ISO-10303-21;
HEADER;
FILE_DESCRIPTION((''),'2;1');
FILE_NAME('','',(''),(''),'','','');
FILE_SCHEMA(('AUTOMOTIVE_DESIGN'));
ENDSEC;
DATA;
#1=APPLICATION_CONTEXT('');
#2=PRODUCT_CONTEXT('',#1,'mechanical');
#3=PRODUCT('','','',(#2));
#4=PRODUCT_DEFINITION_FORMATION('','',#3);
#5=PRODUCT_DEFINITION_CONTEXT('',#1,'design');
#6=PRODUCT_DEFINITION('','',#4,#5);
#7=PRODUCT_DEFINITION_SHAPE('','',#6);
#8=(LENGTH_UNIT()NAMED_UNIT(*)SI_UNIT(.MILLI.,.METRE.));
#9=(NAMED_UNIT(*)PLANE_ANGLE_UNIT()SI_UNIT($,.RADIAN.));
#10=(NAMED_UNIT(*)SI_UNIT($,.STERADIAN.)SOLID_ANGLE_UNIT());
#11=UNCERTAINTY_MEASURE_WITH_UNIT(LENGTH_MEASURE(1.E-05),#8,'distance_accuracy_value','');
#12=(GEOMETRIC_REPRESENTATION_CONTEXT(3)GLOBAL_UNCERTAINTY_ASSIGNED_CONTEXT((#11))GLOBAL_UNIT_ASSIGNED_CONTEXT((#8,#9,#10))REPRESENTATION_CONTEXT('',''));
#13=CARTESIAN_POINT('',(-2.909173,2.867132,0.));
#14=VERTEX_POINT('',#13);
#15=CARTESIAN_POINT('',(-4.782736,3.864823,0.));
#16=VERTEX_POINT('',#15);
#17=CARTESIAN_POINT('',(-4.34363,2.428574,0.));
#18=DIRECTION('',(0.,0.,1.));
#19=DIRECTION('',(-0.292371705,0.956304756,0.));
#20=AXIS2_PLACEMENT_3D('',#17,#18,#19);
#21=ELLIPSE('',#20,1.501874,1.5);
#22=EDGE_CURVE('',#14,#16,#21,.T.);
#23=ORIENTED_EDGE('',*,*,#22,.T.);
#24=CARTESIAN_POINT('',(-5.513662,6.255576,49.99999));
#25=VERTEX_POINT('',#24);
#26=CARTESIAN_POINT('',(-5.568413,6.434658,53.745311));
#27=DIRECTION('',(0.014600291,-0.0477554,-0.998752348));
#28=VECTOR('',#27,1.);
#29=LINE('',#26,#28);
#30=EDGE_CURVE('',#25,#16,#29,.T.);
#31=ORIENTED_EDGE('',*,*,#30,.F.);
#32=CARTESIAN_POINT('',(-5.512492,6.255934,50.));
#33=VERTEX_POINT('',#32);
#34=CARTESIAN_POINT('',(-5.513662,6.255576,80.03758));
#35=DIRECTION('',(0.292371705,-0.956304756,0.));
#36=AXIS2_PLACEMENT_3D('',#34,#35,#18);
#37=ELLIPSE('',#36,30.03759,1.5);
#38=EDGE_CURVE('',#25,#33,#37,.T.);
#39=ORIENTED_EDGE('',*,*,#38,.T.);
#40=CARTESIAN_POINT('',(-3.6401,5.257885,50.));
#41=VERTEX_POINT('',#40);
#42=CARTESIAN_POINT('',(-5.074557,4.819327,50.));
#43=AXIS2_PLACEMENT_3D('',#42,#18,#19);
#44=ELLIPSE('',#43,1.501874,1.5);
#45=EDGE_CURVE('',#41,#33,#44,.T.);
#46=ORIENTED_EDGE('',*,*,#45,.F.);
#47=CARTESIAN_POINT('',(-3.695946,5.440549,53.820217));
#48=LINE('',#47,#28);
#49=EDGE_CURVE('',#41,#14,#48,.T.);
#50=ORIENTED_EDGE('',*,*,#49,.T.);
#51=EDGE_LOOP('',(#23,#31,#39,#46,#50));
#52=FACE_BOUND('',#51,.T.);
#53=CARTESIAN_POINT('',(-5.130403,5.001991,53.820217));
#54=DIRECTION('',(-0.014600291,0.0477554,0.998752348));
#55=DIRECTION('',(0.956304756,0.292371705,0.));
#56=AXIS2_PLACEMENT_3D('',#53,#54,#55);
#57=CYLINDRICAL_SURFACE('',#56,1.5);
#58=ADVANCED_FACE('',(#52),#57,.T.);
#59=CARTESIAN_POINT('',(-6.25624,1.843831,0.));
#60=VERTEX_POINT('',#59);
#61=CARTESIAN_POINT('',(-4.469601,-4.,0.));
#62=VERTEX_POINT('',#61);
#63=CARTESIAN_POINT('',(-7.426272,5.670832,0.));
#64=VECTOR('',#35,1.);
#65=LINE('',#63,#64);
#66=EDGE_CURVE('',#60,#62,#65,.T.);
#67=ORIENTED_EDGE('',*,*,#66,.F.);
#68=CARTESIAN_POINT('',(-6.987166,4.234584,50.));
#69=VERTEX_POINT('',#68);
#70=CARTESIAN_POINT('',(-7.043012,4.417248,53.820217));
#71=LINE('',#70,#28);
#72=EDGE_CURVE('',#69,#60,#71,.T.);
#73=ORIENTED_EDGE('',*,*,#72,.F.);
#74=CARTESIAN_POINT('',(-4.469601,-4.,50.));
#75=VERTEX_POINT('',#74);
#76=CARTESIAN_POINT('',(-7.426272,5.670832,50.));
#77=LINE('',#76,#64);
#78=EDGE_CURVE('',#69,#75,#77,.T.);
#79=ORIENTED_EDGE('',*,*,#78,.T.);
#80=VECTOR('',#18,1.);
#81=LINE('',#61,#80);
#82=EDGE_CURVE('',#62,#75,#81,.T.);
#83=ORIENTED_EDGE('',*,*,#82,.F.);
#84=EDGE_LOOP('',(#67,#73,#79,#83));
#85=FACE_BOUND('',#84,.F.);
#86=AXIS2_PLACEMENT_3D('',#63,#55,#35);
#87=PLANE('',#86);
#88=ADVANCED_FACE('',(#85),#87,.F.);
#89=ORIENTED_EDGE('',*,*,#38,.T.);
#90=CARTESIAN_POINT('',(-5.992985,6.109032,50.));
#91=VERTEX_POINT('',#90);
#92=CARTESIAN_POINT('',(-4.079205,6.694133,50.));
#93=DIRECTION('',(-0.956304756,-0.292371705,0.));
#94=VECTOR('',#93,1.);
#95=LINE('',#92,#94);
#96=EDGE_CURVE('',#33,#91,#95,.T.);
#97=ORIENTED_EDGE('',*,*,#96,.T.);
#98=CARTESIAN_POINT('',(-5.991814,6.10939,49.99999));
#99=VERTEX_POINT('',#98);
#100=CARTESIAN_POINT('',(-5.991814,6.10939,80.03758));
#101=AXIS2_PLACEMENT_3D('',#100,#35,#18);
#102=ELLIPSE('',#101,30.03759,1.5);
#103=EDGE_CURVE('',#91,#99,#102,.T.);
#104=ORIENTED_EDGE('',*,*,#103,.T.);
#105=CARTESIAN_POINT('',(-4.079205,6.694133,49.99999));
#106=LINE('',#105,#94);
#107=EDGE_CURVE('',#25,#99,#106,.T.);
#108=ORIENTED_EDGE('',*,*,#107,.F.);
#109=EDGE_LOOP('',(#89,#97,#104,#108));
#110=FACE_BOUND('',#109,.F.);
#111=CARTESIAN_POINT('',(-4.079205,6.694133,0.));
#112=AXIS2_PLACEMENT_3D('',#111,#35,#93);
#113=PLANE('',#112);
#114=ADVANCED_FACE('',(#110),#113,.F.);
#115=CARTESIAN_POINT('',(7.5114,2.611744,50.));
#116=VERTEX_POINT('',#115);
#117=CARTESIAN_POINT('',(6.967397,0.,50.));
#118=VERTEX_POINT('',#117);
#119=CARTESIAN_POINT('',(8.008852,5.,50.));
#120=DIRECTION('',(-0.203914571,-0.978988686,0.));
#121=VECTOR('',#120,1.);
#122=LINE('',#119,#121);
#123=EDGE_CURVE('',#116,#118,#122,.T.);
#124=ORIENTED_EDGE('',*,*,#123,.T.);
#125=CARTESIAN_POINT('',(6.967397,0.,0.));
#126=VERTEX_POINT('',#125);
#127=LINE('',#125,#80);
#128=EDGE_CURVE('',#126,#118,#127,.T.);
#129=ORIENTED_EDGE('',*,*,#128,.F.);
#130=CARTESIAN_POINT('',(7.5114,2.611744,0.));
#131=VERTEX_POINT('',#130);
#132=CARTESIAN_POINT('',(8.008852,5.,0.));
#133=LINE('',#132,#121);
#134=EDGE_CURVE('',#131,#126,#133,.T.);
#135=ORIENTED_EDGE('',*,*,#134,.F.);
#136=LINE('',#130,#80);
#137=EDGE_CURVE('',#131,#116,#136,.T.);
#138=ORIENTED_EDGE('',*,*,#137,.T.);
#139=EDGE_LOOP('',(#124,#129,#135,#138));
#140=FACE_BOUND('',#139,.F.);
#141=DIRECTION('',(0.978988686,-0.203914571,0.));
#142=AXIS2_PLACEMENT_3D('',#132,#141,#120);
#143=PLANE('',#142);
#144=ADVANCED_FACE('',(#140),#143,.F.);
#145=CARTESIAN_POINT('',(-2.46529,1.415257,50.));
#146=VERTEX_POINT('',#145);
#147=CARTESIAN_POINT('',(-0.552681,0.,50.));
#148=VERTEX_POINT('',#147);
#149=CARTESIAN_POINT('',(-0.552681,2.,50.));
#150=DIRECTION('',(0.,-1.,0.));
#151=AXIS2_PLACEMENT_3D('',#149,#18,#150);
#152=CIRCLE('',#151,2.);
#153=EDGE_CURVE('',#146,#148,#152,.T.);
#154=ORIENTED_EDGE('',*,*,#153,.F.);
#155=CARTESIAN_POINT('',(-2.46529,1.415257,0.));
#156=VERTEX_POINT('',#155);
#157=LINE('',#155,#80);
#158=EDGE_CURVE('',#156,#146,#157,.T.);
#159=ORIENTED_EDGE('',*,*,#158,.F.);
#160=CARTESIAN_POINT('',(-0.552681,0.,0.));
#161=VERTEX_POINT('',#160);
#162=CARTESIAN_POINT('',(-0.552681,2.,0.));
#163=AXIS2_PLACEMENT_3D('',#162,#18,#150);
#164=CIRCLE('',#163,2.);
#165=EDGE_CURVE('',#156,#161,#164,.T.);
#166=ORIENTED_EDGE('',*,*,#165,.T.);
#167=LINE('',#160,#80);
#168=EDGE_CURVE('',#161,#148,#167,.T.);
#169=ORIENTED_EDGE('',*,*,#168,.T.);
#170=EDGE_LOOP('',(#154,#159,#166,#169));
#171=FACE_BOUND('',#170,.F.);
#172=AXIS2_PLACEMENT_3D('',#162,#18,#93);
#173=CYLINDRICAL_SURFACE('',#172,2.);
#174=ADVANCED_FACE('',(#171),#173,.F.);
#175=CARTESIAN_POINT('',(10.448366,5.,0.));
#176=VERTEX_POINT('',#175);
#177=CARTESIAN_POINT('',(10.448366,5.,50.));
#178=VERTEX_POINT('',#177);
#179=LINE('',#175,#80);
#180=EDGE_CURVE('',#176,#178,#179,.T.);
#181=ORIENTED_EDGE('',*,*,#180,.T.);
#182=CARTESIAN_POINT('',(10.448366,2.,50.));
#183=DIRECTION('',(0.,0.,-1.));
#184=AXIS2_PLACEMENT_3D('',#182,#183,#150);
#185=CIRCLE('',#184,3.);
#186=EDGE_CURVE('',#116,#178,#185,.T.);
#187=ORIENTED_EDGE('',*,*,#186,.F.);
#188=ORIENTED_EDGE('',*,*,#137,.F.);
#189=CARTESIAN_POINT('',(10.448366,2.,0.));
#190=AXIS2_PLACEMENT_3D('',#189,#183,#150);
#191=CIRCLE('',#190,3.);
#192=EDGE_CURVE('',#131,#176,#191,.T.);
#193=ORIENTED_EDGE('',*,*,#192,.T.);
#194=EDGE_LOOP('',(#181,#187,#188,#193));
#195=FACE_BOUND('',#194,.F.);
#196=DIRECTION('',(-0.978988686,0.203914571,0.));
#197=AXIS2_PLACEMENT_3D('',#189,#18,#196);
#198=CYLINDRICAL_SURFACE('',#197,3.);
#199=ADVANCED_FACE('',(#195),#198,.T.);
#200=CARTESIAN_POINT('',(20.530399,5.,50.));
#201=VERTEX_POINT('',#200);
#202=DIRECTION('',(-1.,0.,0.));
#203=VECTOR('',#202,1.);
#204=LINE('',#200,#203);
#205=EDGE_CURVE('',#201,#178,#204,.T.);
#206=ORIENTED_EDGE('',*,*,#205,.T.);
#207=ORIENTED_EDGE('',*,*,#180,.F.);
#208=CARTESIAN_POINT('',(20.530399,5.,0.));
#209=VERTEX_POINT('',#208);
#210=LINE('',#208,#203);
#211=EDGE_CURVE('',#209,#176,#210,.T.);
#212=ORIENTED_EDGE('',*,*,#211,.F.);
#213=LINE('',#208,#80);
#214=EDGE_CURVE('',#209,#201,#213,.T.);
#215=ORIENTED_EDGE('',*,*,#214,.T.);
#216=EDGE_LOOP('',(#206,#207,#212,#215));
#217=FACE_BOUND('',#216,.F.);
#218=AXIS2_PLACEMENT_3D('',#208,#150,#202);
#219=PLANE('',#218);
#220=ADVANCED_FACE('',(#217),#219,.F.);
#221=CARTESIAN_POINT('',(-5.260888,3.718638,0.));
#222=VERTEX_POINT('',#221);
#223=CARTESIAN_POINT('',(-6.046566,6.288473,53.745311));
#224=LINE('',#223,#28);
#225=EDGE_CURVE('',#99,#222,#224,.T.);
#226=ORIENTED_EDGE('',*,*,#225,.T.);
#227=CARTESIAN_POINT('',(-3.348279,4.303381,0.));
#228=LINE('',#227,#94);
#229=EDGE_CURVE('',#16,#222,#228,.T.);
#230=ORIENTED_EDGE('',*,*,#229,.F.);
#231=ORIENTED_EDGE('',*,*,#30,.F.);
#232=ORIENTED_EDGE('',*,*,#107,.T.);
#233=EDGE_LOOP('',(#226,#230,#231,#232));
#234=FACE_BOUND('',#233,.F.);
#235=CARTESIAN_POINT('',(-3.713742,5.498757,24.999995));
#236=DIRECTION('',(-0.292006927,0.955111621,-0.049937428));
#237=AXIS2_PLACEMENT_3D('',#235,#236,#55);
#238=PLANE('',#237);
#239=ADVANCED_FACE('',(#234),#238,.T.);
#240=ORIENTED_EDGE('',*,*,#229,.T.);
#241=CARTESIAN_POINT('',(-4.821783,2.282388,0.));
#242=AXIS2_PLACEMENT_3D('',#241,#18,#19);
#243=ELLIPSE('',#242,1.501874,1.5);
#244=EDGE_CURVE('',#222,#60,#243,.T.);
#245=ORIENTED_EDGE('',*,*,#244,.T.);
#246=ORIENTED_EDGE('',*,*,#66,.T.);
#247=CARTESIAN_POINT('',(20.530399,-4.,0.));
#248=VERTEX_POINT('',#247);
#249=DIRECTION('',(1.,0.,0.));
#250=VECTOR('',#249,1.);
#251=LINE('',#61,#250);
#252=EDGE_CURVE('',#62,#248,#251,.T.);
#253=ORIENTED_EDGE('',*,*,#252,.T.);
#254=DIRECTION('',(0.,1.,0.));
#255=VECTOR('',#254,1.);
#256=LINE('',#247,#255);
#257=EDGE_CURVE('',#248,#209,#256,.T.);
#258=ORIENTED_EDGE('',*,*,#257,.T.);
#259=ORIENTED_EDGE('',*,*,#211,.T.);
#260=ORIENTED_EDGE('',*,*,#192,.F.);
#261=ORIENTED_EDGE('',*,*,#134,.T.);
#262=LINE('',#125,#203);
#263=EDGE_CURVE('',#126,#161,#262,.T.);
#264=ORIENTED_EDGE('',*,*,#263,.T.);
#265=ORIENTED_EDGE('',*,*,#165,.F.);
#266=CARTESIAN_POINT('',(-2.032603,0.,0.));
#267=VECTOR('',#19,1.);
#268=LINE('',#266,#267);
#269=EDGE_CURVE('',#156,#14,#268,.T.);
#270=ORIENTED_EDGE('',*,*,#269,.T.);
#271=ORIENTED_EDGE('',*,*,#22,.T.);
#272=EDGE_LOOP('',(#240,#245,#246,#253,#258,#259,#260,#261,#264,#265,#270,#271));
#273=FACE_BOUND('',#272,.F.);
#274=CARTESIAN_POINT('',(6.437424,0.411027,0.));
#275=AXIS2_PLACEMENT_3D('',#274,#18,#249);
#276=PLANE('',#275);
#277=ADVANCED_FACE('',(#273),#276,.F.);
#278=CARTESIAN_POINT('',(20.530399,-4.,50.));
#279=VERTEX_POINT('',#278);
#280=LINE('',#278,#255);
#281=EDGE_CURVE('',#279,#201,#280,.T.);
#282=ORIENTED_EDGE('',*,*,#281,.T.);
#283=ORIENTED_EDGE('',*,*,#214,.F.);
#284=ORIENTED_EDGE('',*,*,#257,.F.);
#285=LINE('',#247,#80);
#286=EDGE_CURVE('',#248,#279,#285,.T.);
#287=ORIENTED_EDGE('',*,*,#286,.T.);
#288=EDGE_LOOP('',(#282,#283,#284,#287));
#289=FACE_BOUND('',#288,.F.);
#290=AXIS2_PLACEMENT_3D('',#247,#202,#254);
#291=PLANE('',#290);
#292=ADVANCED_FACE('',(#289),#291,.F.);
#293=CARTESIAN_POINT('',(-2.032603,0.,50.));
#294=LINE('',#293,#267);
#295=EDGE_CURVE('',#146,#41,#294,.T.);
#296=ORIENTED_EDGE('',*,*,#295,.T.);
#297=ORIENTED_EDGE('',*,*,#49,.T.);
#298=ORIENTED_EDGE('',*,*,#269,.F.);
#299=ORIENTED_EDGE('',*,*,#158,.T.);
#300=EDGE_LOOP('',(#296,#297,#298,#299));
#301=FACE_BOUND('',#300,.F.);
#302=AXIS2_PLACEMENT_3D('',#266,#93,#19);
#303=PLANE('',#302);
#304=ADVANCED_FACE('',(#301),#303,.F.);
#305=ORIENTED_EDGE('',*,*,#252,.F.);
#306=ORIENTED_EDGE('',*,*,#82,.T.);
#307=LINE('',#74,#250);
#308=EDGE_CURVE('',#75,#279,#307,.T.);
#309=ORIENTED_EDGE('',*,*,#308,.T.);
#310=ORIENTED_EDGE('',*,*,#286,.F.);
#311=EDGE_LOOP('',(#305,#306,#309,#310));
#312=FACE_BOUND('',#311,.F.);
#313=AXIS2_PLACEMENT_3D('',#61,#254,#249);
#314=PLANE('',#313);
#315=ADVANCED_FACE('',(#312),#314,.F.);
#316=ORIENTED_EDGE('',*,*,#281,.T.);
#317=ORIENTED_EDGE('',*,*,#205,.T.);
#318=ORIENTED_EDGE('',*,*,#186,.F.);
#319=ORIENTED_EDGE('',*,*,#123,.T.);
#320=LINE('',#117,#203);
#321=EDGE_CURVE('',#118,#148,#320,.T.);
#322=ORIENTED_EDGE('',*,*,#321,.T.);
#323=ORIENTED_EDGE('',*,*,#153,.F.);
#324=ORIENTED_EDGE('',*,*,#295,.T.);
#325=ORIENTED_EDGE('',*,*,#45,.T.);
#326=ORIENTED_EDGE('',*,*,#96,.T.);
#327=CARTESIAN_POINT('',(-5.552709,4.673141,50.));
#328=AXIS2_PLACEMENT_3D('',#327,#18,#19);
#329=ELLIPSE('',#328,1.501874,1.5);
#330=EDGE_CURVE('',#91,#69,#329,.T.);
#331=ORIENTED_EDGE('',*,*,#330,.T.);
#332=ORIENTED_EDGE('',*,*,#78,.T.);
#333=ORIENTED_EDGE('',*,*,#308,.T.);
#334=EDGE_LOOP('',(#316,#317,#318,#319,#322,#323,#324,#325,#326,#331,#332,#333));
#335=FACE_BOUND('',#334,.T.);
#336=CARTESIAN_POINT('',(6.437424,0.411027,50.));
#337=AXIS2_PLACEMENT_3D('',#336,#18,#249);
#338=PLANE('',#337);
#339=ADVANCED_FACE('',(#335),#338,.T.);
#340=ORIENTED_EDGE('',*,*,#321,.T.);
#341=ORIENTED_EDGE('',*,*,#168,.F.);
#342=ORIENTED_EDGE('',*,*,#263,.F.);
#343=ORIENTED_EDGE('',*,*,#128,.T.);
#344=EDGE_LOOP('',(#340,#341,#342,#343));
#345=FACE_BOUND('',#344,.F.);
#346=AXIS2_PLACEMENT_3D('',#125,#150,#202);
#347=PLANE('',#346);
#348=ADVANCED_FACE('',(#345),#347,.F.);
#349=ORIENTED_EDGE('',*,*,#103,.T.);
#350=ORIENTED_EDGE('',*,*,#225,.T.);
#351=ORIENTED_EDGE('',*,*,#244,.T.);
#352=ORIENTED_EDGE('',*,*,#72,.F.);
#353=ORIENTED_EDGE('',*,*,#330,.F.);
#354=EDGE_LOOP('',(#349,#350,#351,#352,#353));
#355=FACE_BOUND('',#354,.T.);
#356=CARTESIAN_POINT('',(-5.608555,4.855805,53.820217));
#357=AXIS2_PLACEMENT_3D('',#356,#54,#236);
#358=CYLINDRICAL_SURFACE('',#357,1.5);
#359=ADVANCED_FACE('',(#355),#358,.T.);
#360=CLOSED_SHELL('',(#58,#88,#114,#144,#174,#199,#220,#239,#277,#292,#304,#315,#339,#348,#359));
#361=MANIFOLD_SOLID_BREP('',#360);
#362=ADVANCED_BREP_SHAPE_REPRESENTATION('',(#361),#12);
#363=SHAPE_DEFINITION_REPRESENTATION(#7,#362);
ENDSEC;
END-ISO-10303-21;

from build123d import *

# Parameters (mm, degrees)
F1_DEPTH    = 50
F2_SIZE2    = 2.49999
F2_SIZE     = 49.99999
F3_T1_DEPTH = 57.5624504994
F4_R        = 2
F5_R        = 3


# Not quite as in the source:
# - a fillet or chamfer that OpenCascade refuses, or shapes differently, is made with other operations: its cross-section is extruded or revolved along the edge and cut away or added
# - a fillet or chamfer is up to 0.001 mm smaller than in the source, because OpenCascade refuses the exact size


with BuildPart() as f1:
    # F0 (on Top) → F1 (new body)
    with BuildSketch(Plane.XY):
        Polygon((-4.0792049388, 6.6941332917), (-7.4262715846, 5.6708323252), (-4.4696014276, -4), (20.5303985724, -4), (20.5303985724, 5), (8.0088521886, 5), (6.9673969943, 0), (-2.0326030057, 0), align=None)
    extrude(amount=F1_DEPTH)

    # F2 (size 50 and 2.5 in the source; OpenCascade refuses exactly that, so slightly less here)
    f2_edges = [f1.edges().sort_by_distance(p)[0] for p in [
        (-5.752738, 6.182483, 0),
    ]]
    f2_side = f1.faces().sort_by_distance((-5.752738, 6.182483, 25))[0]
    chamfer(f2_edges, length=F2_SIZE, length2=F2_SIZE2, reference=f2_side)

    # F3: fillet of radius 1.5 on 2 edges, made by hand

    # F3_s2 → F3_t1 (cut)
    with BuildSketch(Plane(origin=(-0.7893916774, 2.5819838349, 53.9993894282), x_dir=(0.956304756, 0.2923717047, 0), z_dir=(0.0146002909, -0.0477553996, -0.9987523483))):
        with BuildLine():
            ThreePointArc((-1.9437879213, -3.5879297119), (-2.3831277496, -4.6485898837), (-3.4437879213, -5.0879297119))
            Line((-3.4437879213, -5.0879297119), (-1.9437879213, -5.0879297119))
            Line((-1.9437879213, -5.0879297119), (-1.9437879213, -3.5879297119))
        make_face()
        with BuildLine():
            ThreePointArc((-3.9437879213, -5.0879297119), (-5.0044480931, -4.6485898837), (-5.4437879213, -3.5879297119))
            Line((-5.4437879213, -3.5879297119), (-5.4437879213, -5.0879297119))
            Line((-5.4437879213, -5.0879297119), (-3.9437879213, -5.0879297119))
        make_face()
    extrude(amount=F3_T1_DEPTH, mode=Mode.SUBTRACT)

    # F4
    f4_edges = [f1.edges().sort_by_distance(p)[0] for p in [
        (-2.032603, 0, 25),
    ]]
    fillet(f4_edges, radius=F4_R)

    # F5
    f5_edges = [f1.edges().sort_by_distance(p)[0] for p in [
        (8.008852, 5, 25),
    ]]
    fillet(f5_edges, radius=F5_R)


solid = f1.part
